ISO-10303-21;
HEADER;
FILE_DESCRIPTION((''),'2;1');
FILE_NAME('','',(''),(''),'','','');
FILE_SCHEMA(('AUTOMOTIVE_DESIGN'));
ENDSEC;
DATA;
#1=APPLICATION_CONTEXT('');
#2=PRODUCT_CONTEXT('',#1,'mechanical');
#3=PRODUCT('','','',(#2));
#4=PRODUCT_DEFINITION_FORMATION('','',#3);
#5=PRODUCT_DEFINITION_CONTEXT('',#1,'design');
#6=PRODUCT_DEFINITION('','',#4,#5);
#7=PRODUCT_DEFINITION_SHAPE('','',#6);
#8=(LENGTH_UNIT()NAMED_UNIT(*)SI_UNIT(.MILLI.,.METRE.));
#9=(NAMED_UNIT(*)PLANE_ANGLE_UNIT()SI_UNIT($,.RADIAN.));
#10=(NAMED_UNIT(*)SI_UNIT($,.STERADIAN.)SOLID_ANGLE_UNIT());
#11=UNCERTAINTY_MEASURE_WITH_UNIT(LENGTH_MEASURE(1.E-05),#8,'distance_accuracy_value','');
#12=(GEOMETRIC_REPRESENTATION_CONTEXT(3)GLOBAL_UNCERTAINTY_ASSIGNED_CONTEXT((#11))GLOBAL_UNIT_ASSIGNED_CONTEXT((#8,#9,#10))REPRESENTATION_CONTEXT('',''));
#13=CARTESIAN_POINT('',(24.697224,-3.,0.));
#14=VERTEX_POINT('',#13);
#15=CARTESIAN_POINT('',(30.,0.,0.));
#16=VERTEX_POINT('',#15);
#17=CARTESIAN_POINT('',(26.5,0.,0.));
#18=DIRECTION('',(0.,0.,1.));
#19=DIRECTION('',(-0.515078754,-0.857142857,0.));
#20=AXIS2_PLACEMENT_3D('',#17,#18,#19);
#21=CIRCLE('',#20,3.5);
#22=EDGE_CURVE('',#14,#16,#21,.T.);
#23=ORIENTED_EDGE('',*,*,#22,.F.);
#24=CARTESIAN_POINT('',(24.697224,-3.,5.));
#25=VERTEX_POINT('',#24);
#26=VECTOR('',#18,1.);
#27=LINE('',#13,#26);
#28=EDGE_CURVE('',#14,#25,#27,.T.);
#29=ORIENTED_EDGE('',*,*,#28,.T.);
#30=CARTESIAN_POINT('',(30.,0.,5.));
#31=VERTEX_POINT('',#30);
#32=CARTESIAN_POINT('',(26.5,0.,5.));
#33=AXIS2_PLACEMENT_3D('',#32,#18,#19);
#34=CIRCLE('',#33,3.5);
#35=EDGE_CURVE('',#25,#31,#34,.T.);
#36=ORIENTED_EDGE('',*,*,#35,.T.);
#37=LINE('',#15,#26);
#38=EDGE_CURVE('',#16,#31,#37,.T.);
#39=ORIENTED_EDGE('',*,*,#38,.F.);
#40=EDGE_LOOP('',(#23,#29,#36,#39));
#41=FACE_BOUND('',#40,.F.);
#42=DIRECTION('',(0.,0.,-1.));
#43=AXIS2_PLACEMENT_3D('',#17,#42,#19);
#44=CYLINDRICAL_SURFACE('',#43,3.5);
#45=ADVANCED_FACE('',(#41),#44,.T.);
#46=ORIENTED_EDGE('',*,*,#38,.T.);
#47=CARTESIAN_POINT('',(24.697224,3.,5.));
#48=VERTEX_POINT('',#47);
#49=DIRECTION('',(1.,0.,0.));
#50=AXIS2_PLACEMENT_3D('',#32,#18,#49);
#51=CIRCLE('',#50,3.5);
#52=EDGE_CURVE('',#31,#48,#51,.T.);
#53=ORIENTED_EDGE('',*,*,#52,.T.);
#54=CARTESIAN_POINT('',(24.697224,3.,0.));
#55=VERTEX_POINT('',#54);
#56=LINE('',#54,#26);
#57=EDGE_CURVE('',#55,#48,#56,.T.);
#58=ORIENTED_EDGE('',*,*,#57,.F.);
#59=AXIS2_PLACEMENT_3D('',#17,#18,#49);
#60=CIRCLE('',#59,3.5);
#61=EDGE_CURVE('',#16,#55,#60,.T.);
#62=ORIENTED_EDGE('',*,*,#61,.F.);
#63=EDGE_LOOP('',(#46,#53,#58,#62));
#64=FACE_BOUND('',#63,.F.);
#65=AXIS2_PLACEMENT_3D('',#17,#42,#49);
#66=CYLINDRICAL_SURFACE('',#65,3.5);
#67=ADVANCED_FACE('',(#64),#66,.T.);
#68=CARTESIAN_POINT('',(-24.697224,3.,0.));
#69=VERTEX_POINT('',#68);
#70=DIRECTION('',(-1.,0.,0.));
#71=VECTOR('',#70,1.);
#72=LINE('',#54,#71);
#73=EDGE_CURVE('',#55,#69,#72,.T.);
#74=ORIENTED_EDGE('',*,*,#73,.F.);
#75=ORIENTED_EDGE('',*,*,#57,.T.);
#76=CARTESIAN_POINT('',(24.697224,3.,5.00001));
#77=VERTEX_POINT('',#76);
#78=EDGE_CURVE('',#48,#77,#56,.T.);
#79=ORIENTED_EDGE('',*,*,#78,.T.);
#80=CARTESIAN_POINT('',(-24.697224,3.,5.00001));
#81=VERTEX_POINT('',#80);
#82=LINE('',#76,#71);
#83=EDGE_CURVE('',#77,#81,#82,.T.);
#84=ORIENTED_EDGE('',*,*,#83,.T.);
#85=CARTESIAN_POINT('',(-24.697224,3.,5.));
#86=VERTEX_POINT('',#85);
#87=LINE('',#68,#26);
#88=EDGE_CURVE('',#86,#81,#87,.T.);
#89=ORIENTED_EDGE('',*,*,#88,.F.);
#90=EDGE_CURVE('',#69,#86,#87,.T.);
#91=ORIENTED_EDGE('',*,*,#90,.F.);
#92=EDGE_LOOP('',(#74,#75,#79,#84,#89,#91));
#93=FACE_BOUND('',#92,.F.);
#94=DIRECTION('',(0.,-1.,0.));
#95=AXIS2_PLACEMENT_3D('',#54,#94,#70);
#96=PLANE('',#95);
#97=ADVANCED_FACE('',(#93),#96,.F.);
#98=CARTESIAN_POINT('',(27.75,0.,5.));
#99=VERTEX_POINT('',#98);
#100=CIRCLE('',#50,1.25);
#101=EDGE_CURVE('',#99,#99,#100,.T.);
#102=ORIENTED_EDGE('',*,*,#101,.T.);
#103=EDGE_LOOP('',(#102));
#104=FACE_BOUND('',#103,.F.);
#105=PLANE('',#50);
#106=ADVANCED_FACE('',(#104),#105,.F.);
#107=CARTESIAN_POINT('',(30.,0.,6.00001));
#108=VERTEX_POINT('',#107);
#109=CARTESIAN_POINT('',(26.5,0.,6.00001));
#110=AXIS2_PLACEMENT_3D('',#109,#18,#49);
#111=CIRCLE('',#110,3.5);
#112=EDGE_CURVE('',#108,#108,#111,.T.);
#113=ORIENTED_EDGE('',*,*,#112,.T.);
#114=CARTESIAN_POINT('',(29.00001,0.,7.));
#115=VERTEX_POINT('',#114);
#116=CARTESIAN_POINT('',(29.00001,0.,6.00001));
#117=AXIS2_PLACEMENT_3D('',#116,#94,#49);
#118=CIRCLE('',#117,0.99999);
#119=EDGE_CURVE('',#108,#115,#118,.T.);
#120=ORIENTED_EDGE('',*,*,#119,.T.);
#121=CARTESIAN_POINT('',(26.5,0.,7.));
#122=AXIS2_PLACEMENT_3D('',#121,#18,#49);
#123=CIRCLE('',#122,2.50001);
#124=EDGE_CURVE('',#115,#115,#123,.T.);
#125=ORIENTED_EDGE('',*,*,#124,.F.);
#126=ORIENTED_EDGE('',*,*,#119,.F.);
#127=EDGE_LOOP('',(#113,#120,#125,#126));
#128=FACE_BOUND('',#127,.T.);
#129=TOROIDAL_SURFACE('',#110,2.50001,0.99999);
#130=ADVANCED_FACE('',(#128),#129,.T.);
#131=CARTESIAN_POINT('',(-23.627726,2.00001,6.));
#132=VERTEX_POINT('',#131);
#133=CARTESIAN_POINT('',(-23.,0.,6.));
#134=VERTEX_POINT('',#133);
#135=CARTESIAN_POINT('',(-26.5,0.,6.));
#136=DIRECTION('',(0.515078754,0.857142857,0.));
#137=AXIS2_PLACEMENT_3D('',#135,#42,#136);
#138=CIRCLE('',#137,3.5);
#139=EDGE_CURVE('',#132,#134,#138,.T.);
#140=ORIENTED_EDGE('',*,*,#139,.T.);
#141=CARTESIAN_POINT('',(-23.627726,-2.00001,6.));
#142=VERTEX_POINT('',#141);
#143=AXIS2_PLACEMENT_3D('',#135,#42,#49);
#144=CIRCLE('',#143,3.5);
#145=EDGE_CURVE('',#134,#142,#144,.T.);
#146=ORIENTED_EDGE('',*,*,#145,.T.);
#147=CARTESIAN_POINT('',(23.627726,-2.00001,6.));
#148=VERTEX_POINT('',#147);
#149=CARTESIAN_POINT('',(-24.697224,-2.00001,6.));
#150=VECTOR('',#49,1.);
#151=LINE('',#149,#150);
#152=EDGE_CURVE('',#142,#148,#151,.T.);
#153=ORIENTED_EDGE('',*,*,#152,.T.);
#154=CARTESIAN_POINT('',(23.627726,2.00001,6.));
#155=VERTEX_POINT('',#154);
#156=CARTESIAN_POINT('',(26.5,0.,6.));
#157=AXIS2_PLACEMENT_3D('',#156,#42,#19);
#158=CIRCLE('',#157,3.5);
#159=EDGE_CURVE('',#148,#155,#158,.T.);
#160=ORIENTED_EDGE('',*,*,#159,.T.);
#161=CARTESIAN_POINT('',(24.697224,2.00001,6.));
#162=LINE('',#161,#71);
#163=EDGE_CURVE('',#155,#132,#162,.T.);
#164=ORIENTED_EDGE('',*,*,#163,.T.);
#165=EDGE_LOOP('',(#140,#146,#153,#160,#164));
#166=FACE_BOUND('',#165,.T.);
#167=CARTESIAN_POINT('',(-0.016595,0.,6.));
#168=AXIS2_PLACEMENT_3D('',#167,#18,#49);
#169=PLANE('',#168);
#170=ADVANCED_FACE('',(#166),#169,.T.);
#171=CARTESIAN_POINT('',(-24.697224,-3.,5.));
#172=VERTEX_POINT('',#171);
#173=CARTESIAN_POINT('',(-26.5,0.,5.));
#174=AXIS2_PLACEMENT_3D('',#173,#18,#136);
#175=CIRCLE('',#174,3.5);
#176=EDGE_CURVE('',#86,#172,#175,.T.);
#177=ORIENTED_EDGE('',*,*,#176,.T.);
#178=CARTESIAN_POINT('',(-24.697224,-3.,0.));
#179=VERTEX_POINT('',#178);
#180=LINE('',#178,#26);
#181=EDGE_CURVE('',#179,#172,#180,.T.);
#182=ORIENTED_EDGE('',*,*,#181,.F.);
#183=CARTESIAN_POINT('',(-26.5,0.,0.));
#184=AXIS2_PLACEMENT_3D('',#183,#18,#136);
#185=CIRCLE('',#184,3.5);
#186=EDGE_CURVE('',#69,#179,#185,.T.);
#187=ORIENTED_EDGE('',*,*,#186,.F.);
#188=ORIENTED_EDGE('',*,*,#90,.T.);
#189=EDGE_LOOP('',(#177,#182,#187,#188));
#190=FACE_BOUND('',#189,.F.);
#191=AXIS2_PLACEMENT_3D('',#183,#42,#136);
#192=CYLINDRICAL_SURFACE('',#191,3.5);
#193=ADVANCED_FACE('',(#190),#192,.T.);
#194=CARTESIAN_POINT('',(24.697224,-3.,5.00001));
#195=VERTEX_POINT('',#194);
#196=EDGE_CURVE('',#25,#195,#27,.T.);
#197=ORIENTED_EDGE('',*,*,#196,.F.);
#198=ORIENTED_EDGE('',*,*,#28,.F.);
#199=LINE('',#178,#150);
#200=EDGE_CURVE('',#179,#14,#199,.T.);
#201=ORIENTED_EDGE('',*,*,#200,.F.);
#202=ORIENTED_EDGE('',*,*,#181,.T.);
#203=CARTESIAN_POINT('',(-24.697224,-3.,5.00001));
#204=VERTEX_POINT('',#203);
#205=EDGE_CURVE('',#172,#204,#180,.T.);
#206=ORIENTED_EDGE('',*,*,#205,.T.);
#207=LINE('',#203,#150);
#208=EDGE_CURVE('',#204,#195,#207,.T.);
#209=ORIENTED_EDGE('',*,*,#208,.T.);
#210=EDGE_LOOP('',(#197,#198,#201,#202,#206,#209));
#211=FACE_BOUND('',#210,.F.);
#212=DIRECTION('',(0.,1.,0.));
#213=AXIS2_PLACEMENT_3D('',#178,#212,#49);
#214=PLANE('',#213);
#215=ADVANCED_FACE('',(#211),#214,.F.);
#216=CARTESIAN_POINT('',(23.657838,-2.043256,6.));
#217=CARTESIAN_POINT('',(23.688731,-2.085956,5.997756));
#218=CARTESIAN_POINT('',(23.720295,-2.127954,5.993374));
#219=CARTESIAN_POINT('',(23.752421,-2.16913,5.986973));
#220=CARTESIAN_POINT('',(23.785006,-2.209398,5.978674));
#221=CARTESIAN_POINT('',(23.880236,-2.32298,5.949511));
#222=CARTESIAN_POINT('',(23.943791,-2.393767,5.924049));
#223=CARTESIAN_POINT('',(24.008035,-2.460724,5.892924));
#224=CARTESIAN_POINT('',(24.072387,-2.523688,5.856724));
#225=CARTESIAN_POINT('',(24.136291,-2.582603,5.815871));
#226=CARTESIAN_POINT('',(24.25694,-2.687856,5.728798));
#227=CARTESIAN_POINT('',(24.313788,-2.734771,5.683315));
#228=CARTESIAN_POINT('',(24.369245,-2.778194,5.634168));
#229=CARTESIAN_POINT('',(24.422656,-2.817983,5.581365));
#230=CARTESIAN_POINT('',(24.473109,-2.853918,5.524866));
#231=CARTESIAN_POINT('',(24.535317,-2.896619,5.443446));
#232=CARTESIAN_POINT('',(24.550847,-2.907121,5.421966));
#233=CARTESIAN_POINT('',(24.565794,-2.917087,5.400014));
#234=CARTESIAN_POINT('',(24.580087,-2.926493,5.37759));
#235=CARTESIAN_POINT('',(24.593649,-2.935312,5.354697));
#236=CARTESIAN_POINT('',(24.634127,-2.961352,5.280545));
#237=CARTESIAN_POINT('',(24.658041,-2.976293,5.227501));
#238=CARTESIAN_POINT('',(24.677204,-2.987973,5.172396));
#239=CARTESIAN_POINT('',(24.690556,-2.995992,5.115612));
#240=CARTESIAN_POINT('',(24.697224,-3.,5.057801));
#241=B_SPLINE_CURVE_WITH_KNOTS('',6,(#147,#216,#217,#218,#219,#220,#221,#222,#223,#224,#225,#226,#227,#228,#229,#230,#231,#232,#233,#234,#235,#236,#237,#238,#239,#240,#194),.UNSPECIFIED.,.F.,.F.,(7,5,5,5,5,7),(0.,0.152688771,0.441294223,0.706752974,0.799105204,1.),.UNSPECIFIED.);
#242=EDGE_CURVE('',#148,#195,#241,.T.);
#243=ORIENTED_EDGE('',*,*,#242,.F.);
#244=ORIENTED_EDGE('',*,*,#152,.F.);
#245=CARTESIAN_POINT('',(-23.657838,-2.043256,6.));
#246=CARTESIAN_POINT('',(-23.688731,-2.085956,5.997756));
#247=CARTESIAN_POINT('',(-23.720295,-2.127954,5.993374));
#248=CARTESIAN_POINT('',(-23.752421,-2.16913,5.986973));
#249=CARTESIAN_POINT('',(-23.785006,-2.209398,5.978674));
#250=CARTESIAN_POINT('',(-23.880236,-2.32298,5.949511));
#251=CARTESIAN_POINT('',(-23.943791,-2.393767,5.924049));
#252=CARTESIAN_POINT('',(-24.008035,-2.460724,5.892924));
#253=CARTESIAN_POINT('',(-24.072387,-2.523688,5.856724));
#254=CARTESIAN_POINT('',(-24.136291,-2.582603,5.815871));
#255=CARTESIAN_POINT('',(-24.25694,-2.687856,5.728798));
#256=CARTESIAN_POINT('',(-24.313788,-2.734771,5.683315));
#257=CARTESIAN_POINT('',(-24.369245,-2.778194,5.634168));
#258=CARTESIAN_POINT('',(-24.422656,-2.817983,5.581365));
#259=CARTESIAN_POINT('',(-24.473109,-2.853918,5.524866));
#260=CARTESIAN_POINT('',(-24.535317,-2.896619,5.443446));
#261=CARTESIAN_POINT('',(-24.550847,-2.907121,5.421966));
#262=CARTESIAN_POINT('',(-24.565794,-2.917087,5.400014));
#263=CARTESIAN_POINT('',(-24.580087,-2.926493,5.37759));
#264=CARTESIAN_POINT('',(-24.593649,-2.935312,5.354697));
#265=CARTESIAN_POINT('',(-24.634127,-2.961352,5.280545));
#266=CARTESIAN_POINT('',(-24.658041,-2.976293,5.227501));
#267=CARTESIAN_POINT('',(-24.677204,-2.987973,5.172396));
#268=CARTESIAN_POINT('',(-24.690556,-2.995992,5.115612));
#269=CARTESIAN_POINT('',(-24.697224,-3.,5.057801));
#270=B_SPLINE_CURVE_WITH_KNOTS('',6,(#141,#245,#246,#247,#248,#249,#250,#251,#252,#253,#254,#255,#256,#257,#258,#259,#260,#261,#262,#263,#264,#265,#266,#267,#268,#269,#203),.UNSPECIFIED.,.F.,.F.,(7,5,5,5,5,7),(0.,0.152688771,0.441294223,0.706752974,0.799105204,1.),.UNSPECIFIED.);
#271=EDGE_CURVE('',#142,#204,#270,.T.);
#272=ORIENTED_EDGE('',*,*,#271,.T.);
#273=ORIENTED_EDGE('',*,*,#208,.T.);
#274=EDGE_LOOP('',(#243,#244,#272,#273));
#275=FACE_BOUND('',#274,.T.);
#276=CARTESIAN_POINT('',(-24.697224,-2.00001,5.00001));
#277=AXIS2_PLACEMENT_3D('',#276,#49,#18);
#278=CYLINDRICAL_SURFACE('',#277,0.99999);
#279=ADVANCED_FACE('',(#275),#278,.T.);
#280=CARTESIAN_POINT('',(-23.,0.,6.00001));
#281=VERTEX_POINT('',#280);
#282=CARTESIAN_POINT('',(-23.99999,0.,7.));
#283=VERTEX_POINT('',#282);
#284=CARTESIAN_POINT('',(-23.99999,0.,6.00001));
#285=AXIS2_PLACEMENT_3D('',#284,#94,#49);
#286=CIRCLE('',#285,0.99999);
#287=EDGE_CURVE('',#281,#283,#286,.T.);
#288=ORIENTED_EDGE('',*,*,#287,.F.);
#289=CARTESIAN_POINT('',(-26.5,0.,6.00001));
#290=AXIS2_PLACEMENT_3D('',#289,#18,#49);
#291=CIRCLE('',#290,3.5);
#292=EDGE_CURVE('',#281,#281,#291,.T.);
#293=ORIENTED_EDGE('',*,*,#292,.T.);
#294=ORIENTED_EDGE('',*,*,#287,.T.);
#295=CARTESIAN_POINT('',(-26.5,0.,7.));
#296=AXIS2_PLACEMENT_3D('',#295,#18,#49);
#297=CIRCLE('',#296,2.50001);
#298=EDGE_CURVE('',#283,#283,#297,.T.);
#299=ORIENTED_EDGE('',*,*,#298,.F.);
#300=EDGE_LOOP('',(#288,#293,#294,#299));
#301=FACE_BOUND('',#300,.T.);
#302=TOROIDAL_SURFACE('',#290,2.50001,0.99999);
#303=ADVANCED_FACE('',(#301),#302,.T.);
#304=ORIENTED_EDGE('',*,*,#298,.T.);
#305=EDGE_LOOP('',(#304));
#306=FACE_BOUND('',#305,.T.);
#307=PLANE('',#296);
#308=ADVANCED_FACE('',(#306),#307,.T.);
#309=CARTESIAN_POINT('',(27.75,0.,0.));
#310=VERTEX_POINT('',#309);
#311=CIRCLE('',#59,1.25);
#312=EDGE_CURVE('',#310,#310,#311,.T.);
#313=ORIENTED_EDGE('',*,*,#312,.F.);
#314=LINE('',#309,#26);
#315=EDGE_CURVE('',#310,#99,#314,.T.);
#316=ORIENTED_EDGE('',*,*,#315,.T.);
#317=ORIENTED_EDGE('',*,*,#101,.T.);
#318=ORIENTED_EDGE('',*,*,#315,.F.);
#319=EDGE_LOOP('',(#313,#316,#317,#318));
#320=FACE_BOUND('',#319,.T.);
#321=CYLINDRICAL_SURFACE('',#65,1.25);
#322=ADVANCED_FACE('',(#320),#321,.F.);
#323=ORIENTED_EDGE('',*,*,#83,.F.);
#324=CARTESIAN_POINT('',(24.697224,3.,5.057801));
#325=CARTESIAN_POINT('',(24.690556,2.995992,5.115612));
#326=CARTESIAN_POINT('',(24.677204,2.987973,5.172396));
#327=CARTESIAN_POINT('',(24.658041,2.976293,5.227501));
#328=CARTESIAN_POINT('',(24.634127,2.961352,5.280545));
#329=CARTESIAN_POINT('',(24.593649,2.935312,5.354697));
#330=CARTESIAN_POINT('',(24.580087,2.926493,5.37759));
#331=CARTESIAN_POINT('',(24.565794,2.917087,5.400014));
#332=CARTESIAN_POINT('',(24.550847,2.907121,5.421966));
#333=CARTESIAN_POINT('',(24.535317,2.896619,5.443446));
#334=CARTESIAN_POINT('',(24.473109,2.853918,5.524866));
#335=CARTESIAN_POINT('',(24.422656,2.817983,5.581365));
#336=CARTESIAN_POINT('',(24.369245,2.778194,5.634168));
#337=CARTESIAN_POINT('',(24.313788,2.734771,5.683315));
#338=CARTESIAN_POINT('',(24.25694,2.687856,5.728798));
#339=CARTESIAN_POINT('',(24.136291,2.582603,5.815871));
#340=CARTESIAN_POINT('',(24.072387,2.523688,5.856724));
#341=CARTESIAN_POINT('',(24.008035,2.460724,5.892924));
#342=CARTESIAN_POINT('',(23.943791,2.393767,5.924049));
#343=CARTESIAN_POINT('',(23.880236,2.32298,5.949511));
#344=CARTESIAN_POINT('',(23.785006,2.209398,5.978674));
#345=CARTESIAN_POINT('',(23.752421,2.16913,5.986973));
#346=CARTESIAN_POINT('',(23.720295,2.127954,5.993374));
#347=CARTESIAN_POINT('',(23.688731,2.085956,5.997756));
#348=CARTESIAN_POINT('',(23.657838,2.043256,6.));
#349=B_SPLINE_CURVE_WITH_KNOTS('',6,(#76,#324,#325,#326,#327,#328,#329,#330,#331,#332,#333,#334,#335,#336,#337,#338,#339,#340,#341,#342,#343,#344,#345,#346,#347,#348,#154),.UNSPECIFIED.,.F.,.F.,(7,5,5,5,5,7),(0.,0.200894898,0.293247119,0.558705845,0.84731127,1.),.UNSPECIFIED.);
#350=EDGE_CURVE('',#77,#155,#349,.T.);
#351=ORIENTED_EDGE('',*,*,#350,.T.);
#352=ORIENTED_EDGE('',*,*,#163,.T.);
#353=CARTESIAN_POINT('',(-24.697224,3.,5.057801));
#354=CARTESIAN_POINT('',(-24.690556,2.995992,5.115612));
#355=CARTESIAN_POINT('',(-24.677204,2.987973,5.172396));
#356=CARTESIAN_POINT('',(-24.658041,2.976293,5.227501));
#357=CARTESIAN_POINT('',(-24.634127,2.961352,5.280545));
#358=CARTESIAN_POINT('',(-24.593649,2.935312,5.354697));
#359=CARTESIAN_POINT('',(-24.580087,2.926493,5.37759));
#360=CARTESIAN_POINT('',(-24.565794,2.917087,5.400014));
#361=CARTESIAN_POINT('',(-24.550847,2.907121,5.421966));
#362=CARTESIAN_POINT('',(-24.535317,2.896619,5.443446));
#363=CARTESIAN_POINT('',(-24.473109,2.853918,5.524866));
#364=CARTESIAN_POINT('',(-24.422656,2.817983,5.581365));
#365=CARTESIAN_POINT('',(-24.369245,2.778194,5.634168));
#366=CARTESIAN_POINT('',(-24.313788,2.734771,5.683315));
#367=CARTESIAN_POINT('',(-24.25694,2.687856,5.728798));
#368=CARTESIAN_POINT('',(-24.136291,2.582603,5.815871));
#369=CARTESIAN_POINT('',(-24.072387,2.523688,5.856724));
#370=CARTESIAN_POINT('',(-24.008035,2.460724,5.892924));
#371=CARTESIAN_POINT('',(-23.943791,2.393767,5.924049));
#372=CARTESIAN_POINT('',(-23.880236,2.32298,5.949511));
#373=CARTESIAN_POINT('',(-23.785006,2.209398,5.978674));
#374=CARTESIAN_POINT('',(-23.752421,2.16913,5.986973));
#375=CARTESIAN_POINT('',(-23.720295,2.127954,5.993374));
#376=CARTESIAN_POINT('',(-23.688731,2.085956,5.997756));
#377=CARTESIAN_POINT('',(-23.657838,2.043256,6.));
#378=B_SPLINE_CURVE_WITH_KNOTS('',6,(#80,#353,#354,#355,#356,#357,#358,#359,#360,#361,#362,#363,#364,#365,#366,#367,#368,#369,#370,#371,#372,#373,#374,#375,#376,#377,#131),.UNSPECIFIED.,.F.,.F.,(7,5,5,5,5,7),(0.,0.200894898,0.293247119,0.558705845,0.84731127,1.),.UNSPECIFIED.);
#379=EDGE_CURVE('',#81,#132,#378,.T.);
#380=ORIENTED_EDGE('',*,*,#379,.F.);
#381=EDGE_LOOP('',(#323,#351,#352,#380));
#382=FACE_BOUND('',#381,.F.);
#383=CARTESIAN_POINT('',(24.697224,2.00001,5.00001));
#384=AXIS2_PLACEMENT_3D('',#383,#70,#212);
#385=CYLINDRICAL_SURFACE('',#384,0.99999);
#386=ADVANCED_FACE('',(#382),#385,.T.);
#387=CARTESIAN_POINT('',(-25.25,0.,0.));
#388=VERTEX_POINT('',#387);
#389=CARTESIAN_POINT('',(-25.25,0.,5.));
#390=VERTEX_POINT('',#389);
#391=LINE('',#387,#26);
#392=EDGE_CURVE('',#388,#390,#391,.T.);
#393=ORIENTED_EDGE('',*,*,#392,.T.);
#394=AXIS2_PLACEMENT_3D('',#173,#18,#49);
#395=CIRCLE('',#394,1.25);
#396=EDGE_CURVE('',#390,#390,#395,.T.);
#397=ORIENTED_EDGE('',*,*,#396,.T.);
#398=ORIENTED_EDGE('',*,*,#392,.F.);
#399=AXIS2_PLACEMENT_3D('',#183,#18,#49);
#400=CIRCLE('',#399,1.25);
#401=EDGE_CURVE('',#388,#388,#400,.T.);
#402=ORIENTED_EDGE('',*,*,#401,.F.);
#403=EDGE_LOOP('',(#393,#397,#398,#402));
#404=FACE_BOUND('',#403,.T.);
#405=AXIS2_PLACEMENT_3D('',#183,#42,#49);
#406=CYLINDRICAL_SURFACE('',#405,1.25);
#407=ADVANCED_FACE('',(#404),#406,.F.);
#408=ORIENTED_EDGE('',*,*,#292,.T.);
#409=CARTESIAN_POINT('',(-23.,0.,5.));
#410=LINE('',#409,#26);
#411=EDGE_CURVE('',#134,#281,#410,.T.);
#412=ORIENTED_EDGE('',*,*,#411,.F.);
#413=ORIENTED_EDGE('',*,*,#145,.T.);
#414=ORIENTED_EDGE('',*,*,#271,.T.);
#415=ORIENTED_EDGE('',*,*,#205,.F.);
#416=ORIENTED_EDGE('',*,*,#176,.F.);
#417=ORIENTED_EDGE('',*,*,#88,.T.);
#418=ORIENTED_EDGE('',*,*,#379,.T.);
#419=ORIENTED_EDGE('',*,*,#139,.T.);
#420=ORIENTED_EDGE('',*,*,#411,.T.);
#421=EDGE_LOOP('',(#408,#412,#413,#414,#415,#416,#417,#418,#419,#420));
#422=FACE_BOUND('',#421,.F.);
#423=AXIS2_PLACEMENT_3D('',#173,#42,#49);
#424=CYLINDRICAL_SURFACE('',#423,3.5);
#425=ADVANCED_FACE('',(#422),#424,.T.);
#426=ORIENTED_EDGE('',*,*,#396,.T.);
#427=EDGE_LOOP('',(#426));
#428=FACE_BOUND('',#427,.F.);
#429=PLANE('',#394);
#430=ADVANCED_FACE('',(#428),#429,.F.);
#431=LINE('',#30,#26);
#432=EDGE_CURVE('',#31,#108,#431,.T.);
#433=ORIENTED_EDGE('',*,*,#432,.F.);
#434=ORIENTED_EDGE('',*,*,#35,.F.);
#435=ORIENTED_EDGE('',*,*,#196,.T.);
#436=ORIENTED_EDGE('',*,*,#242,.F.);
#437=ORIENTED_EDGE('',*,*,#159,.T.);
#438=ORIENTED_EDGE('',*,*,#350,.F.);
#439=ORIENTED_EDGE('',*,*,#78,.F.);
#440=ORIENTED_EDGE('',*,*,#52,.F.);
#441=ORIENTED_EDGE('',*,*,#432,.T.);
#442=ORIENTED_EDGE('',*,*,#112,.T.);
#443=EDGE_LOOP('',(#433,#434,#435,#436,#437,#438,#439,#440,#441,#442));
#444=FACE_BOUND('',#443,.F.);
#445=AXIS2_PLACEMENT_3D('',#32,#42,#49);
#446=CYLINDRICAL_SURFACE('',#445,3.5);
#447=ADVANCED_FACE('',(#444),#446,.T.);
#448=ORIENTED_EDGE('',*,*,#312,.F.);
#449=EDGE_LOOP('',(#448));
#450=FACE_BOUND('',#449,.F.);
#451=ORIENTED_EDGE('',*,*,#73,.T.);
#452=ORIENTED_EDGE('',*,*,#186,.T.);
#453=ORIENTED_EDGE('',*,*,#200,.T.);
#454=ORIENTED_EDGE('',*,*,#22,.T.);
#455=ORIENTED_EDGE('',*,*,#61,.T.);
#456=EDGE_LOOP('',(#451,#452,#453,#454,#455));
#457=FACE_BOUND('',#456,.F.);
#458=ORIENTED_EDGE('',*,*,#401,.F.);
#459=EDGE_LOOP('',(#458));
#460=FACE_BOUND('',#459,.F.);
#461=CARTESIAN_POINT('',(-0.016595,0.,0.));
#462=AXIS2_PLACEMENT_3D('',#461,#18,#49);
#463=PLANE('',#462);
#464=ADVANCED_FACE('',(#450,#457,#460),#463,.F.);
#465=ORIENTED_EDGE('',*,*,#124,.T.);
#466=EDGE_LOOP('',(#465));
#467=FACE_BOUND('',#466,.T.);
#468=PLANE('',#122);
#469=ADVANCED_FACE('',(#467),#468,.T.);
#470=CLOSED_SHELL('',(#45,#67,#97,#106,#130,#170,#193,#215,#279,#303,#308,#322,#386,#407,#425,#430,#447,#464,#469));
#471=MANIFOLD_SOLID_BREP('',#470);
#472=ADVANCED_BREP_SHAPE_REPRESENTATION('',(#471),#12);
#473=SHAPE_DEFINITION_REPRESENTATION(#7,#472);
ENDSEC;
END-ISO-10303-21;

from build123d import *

# Parameters (mm, degrees)
F0_R     = 1.25
F1_DEPTH = 5
F2_DEPTH = 6
F3_R     = 3.5
F4_DEPTH = 2
F5_R     = 3.5
F6_DEPTH = 2
F7_R     = 0.99999


# Not quite as in the source:
# - a fillet or chamfer is up to 0.001 mm smaller than in the source, because OpenCascade refuses the exact size


with BuildPart() as f1:
    # F0 (on Top) → F1 (new body)
    with BuildSketch(Plane.XY):
        with BuildLine():
            ThreePointArc((-24.6972243623, -3), (-23.4537141687, -1.7234101758), (-23, 0))
            ThreePointArc((-23, 0), (-23.4537141687, 1.7234101758), (-24.6972243623, 3))
            ThreePointArc((-24.6972243623, 3), (-30, 0), (-24.6972243623, -3))
        make_face()
        with Locations((-26.5, 0)):
            Circle(F0_R, mode=Mode.SUBTRACT)
    extrude(amount=F1_DEPTH)



with BuildPart() as f1b:
    # F0 (on Top) → F1, piece 2 (new body)
    with BuildSketch(Plane.XY):
        with BuildLine():
            ThreePointArc((30, 0), (28.2234101758, 3.0462858313), (24.6972243623, 3))
            ThreePointArc((24.6972243623, 3), (23, 0), (24.6972243623, -3))
            ThreePointArc((24.6972243623, -3), (28.2234101758, -3.0462858313), (30, 0))
        make_face()
        with Locations((26.5, 0)):
            Circle(F0_R, mode=Mode.SUBTRACT)
    extrude(amount=F1_DEPTH)


with BuildPart() as f1_1:
    add(f1.part)

    add(f1b.part)  # F2 merges F1b
    # F0 (on Top) → F2 (join)
    with BuildSketch(Plane.XY):
        with BuildLine():
            ThreePointArc((-24.6972243623, 3), (-23.4537141687, 1.7234101758), (-23, 0))
            ThreePointArc((-23, 0), (-23.4537141687, -1.7234101758), (-24.6972243623, -3))
            Line((-24.6972243623, -3), (24.6972243623, -3))
            ThreePointArc((24.6972243623, -3), (23, 0), (24.6972243623, 3))
            Line((24.6972243623, 3), (-24.6972243623, 3))
        make_face()
    extrude(amount=F2_DEPTH)

    # F3 (on face) → F4 (join)
    with BuildSketch(Plane.XY.offset(5)):
        with Locations((-26.5, 0)):
            Circle(F3_R)
    extrude(amount=F4_DEPTH)

    # F5 (on face) → F6 (join)
    with BuildSketch(Plane.XY.offset(5)):
        with Locations((26.5, 0)):
            Circle(F5_R)
    extrude(amount=F6_DEPTH)

    # F7 (radius 1 in the source; OpenCascade refuses exactly that, so slightly less here)
    f7_edges = [f1_1.edges().sort_by_distance(p)[0] for p in [
        (0, 3, 6),
        (0, -3, 6),
        (23, 0, 7),
        (-30, 0, 7),
    ]]
    fillet(f7_edges, radius=F7_R)


solid = f1_1.part
